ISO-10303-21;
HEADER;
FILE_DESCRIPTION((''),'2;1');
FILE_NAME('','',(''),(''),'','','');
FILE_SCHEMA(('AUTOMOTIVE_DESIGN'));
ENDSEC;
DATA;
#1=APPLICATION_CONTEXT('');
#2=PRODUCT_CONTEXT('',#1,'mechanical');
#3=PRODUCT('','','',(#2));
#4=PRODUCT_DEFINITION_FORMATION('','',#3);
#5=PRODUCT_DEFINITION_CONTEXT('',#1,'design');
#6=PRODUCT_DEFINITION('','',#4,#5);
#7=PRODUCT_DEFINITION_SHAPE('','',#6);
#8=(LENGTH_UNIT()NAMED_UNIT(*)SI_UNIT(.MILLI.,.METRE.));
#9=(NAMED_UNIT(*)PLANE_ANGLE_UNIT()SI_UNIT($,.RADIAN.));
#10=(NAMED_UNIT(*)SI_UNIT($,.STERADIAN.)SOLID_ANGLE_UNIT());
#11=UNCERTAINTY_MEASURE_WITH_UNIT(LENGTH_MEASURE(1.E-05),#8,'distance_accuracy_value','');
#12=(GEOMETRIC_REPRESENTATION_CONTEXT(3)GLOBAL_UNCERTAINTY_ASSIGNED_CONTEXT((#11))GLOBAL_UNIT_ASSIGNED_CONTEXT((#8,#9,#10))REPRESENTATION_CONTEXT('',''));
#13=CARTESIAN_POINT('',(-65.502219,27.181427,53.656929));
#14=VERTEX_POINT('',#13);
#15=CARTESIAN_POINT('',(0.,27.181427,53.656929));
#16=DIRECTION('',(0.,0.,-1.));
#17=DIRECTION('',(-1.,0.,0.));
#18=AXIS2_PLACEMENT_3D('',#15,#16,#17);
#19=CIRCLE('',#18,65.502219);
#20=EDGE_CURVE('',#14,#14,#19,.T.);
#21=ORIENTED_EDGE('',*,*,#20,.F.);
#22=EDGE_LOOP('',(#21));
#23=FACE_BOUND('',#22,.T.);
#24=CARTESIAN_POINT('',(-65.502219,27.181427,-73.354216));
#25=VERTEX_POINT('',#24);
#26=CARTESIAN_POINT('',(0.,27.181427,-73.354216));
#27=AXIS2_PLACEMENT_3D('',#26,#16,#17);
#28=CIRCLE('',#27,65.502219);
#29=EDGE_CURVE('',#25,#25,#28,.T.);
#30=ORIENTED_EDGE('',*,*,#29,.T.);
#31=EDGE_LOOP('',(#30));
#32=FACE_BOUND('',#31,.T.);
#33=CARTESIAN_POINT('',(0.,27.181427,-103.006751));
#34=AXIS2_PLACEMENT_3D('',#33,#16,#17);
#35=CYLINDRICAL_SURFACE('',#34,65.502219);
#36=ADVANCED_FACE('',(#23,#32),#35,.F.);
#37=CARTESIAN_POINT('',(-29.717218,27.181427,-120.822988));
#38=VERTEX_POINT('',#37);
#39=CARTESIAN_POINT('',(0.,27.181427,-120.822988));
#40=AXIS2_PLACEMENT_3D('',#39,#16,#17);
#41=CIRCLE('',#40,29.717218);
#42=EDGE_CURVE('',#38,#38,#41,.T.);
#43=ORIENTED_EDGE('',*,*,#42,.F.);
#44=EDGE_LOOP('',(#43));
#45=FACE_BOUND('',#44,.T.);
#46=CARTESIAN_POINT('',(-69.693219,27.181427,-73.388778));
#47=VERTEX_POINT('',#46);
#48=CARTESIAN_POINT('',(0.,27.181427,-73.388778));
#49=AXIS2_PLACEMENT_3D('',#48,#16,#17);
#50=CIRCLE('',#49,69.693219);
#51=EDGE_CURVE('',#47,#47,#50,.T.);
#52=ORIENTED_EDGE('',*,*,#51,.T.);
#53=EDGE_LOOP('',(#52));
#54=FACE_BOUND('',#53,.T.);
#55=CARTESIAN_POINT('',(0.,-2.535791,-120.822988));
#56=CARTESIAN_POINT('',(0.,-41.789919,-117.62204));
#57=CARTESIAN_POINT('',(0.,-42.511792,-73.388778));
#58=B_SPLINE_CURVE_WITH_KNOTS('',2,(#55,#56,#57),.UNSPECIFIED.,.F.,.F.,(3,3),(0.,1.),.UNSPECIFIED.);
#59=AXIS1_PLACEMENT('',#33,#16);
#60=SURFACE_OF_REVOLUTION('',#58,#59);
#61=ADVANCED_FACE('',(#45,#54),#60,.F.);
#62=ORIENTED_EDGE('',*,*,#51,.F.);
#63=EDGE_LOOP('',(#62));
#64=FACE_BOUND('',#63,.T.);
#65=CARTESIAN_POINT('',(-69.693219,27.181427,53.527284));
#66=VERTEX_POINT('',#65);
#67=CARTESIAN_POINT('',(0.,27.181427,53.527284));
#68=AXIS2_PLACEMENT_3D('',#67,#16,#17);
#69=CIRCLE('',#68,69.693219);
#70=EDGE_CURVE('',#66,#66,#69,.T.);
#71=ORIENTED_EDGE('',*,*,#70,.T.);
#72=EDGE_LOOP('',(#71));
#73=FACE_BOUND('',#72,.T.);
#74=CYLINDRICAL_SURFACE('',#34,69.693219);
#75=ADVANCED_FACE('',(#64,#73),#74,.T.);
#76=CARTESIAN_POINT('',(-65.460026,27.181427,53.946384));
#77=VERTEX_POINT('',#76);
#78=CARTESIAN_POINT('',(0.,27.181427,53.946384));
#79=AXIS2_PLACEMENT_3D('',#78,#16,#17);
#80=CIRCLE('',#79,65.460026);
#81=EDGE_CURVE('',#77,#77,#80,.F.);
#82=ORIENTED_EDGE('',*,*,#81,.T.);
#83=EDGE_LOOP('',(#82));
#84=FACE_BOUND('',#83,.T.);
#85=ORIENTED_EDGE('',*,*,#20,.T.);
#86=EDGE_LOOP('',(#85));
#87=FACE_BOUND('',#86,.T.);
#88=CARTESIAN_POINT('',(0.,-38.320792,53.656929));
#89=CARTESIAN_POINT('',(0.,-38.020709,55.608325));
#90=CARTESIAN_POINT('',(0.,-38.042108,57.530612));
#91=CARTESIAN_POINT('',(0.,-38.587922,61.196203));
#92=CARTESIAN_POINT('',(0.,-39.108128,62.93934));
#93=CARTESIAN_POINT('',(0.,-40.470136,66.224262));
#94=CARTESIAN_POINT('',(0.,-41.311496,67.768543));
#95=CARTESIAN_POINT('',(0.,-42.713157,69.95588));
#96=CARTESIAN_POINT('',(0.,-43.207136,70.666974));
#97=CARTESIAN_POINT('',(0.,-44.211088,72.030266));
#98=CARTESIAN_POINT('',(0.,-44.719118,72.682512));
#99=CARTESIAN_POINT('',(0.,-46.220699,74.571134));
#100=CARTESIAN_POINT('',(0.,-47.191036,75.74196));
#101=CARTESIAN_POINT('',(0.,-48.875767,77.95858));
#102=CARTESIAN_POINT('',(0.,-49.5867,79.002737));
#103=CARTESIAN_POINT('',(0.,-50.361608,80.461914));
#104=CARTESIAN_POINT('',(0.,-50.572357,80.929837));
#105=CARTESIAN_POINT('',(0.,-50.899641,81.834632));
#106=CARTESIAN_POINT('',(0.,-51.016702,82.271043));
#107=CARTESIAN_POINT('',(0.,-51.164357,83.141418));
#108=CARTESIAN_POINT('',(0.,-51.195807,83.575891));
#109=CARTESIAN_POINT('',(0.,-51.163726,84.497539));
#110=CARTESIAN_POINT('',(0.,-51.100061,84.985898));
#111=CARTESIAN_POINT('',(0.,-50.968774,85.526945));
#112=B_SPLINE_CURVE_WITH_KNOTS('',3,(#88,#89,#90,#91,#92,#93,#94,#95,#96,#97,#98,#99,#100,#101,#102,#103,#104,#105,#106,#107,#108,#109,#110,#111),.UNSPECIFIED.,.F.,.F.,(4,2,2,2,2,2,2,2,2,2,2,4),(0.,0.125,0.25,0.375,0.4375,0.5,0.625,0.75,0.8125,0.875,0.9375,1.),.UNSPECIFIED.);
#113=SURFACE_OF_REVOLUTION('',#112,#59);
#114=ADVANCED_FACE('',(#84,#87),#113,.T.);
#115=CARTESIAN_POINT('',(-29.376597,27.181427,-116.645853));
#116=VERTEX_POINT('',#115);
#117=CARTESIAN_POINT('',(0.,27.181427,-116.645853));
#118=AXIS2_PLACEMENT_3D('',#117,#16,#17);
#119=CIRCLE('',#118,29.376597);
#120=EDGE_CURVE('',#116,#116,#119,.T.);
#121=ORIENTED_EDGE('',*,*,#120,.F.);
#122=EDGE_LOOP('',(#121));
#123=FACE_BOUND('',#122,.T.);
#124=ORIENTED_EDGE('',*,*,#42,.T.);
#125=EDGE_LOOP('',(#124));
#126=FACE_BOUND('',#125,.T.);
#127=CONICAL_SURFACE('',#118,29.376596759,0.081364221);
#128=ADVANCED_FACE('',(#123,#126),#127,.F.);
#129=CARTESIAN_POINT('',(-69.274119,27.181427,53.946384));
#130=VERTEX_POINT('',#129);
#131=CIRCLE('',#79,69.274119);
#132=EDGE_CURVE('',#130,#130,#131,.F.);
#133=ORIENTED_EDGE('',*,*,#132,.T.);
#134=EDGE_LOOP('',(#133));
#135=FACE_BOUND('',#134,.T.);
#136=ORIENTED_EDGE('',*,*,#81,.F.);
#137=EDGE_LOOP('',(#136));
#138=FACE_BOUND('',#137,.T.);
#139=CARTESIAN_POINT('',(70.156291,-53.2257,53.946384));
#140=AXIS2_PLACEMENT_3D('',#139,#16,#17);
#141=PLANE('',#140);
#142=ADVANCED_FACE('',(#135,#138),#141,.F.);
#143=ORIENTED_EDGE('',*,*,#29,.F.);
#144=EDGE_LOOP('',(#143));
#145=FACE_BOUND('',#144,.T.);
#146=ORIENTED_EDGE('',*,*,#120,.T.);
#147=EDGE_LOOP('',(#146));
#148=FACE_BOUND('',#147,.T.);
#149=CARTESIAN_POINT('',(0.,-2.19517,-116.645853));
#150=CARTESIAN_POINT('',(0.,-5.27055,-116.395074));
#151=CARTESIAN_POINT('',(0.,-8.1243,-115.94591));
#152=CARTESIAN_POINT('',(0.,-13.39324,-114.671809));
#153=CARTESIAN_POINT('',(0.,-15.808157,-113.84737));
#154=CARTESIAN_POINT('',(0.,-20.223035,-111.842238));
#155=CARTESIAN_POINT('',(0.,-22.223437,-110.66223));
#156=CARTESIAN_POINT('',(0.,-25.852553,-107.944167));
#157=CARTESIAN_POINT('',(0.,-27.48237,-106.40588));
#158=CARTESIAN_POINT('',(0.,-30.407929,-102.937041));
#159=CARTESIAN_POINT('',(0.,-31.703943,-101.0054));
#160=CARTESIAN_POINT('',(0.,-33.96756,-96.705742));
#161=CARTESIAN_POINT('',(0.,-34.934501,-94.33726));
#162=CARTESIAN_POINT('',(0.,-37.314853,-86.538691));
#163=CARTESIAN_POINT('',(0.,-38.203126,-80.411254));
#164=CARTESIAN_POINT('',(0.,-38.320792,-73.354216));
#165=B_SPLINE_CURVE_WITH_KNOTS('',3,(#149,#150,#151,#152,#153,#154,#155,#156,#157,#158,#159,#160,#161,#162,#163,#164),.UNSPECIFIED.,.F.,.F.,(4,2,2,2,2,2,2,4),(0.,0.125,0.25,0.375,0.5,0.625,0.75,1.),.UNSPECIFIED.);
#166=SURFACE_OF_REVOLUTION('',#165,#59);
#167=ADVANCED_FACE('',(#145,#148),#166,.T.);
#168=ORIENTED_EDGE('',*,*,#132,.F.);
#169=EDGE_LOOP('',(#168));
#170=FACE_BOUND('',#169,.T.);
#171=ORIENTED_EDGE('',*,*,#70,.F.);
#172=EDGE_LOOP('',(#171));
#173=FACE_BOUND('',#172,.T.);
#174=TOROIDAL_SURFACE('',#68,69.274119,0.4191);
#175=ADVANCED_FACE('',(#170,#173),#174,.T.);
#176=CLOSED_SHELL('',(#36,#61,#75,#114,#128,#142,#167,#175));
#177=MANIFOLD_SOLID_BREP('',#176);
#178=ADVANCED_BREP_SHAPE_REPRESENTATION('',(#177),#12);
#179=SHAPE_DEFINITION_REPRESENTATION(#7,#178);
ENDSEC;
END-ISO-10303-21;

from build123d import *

# Parameters (mm, degrees)
REVOLVE_THIN3_OUTLINE_W   = 2.54
REVOLVE_THIN3_OUTLINE_H   = 76.976451611
REVOLVE_THIN3_OUTLINE_H_2 = 0.206366599
REVOLVE_THIN3_OUTLINE_H_3 = 0.02094686
SKETCH32_R                = 47.246273806
SKETCH32_R_2              = 1.041920848
BOSS_EXTRUDE1_DEPTH       = 2.54
FILLET1_R                 = 2.54
SKETCH33_W                = 85.158841119
SKETCH33_H                = 0.170915888
CUT_EXTRUDE1_DEPTH        = 108.458
FILLET2_R                 = 0.254
FILLET3_R                 = 0.254
SCALE3_SCALE              = 1.65
SKETCH35_W                = 53.780187303
SKETCH35_H                = 190.112658653
CUT_EXTRUDE2_DEPTH        = 201.422


# Read off the part's stored shape, not the designer's step: Revolve-Thin3
with BuildPart() as part:
    # Revolve-Thin3 outline → Revolve-Thin3 (revolve)
    with BuildSketch(Plane.XZ.offset(-16.473592108)):
        with Locations((40.968314643, -5.968874658)):
            Rectangle(REVOLVE_THIN3_OUTLINE_W, REVOLVE_THIN3_OUTLINE_H)
        with BuildLine():
            add(Edge.make_bspline(
                [(39.698314643, 32.519351147), (39.687726817, 32.588202211), (39.677799336, 32.656993484), (39.668523832, 32.725717746)],
                knots=[0, 0, 0, 0, 0.007277117, 0.007277117, 0.007277117, 0.007277117], degree=3))
            Line((39.698314643, 32.519351147), (39.698314643, 32.725717746))
            Line((39.698314643, 32.725717746), (39.668523832, 32.725717746))
        make_face()
        with Locations((40.968314643, 32.622534446)):
            Rectangle(REVOLVE_THIN3_OUTLINE_W, REVOLVE_THIN3_OUTLINE_H_2)
        with BuildLine():
            add(Edge.make_bspline(
                [(39.668523832, 32.725717746), (39.518472779, 33.837479263), (39.539043978, 34.931703978), (39.695973098, 35.985611225), (39.697140195, 35.99339708), (39.698314643, 36.001180261)],
                knots=[0.007277117, 0.007277117, 0.007277117, 0.007277117, 0.125, 0.125, 0.125876466, 0.125876466, 0.125876466, 0.125876466], degree=3))
            Line((39.668523832, 32.725717746), (39.698314643, 32.725717746))
            Line((39.698314643, 32.725717746), (39.698314643, 36.001180261))
        make_face()
        with BuildLine():
            Line((39.698314643, -44.478047324), (39.698314643, -44.457100464))
            add(Edge.make_bspline(
                [(39.697961573, -44.478047324), (39.698080508, -44.471066539), (39.698198198, -44.464084253), (39.698314643, -44.457100464)],
                knots=[0.999591782, 0.999591782, 0.999591782, 0.999591782, 1, 1, 1, 1], degree=3))
            Line((39.697961573, -44.478047324), (39.698314643, -44.478047324))
        make_face()
        with Locations((40.968314643, -44.467573894)):
            Rectangle(REVOLVE_THIN3_OUTLINE_W, REVOLVE_THIN3_OUTLINE_H_3)
        with BuildLine():
            Line((39.698314643, 36.001180261), (39.698314643, 32.725717746))
            Line((39.698314643, 32.725717746), (42.238314643, 32.725717746))
            add(Edge.make_bspline(
                [(42.238314643, 32.725717746), (42.054562539, 33.777592883), (42.068967464, 34.803136992), (42.238314643, 35.799403945)],
                knots=[0, 0, 0, 0, 0.141281123, 0.141281123, 0.141281123, 0.141281123], degree=3))
            Line((42.238314643, 35.799403945), (42.238314643, 42.203297665))
            add(Edge.make_bspline(
                [(39.698314643, 36.001180261), (39.864637797, 37.10341997), (40.178381679, 38.152034474), (41.000947274, 40.135916369), (41.510862605, 41.071843995), (42.130351801, 42.038577334), (42.184085036, 42.121152876), (42.238314643, 42.203297665)],
                knots=[0.125876466, 0.125876466, 0.125876466, 0.125876466, 0.25, 0.25, 0.375, 0.375, 0.386733849, 0.386733849, 0.386733849, 0.386733849], degree=3))
        make_face()
        with BuildLine():
            Line((39.698314643, -44.478047324), (39.697961573, -44.478047324))
            add(Edge.make_bspline(
                [(18.010435206, -70.677083721), (19.79573085, -70.522158772), (21.456515081, -70.25595625), (24.590707244, -69.498066317), (26.054293619, -68.998406284), (28.729976787, -67.78317439), (29.942341958, -67.068017905), (32.141805888, -65.420707287), (33.129574164, -64.488411909), (34.902639951, -62.386085615), (35.688102783, -61.215394241), (37.05999238, -58.60954034), (37.646016791, -57.174096931), (39.087083849, -52.452836699), (39.625242566, -48.746219412), (39.697961573, -44.478047324)],
                knots=[0.004627238, 0.004627238, 0.004627238, 0.004627238, 0.125, 0.125, 0.25, 0.25, 0.375, 0.375, 0.5, 0.5, 0.625, 0.625, 0.75, 0.75, 0.999591782, 0.999591782, 0.999591782, 0.999591782], degree=3))
            Line((18.010435206, -70.677083721), (18.010435206, -70.694456457))
            Line((18.010435206, -70.694456457), (28.462249201, -70.694456457))
            add(Edge.make_bspline(
                [(28.462249201, -70.694456457), (36.319875776, -67.117155429), (39.698314643, -58.770046926)],
                knots=[0.250450742, 0.250450742, 0.250450742, 0.688405646, 0.688405646, 0.688405646], degree=2))
            Line((39.698314643, -58.770046926), (39.698314643, -44.478047324))
        make_face()
        with BuildLine():
            Line((42.238314643, -44.478047324), (39.698314643, -44.478047324))
            Line((39.698314643, -44.478047324), (39.698314643, -58.770046926))
            add(Edge.make_bspline(
                [(39.698314643, -58.770046926), (42.101992439, -52.831280485), (42.238314643, -44.478047324)],
                knots=[0.688405646, 0.688405646, 0.688405646, 1, 1, 1], degree=2))
        make_face()
        with BuildLine():
            add(Edge.make_bspline(
                [(42.238314643, 42.203297665), (42.472937439, 42.558694673), (42.716851503, 42.906028704), (43.268191066, 43.654706519), (43.576088068, 44.050007388), (44.486136773, 45.194626874), (45.074219946, 45.904218472), (46.0952688, 47.247624232), (46.526137449, 47.880446647), (46.995778794, 48.764796386), (47.123505223, 49.048386117), (47.278542653, 49.476995244), (47.325447008, 49.628350247), (47.363757964, 49.77823029)],
                knots=[0.386733849, 0.386733849, 0.386733849, 0.386733849, 0.4375, 0.4375, 0.5, 0.5, 0.625, 0.625, 0.75, 0.75, 0.8125, 0.8125, 0.847702352, 0.847702352, 0.847702352, 0.847702352], degree=3))
            Line((42.238314643, 42.203297665), (42.238314643, 35.799403945))
            add(Edge.make_bspline(
                [(42.238314643, 35.799403945), (42.577155463, 37.792799485), (44.167905472, 40.904465888), (46.512712316, 43.628815223), (47.363757964, 44.722836867)],
                knots=[0.141281123, 0.141281123, 0.141281123, 0.141281123, 0.423965559, 0.610115154, 0.610115154, 0.610115154, 0.610115154], degree=3))
            Line((47.363757964, 44.722836867), (47.363757964, 49.77823029))
        make_face()
        with BuildLine():
            Line((18.010435206, -70.694456457), (18.010435206, -70.677083721))
            add(Edge.make_bspline(
                [(17.803998036, -70.694456457), (17.872994465, -70.688830195), (17.941806831, -70.683039176), (18.010435206, -70.677083721)],
                knots=[0, 0, 0, 0, 0.004627238, 0.004627238, 0.004627238, 0.004627238], degree=3))
            Line((17.803998036, -70.694456457), (18.010435206, -70.694456457))
        make_face()
        with BuildLine():
            add(Edge.make_bspline(
                [(47.363757964, 49.77823029), (47.393466178, 49.894454702), (47.418006992, 50.009792187), (47.482293388, 50.388738185), (47.501353806, 50.652055315), (47.481910982, 51.210629928), (47.44332582, 51.506604575), (47.363757964, 51.83451188)],
                knots=[0.847702352, 0.847702352, 0.847702352, 0.847702352, 0.875, 0.875, 0.9375, 0.9375, 1, 1, 1, 1], degree=3))
            Line((47.363757964, 49.77823029), (47.363757964, 44.722836867))
            add(Edge.make_bspline(
                [(47.363757964, 44.722836867), (48.462338755, 46.135065654), (49.427688757, 47.567830661), (49.832127601, 49.178979157)],
                knots=[0.610115154, 0.610115154, 0.610115154, 0.610115154, 0.850408223, 0.850408223, 0.850408223, 0.850408223], degree=3))
            Line((49.832127601, 49.178979157), (49.832127601, 51.83451188))
            Line((49.832127601, 51.83451188), (47.363757964, 51.83451188))
        make_face()
        Polygon((18.010435206, -70.694456457), (17.803998036, -70.694456457), (18.010435206, -73.226053521), align=None)
        with BuildLine():
            Line((28.462249201, -70.694456457), (18.010435206, -70.694456457))
            Line((18.010435206, -70.694456457), (18.010435206, -73.226053521))
            add(Edge.make_bspline(
                [(18.010435206, -73.226053521), (23.968753656, -72.740186943), (28.462249201, -70.694456457)],
                knots=[0, 0, 0, 0.250450742, 0.250450742, 0.250450742], degree=2))
        make_face()
        Polygon((49.832127601, 52.433470423), (47.363757964, 51.83451188), (49.832127601, 51.83451188), align=None)
        with BuildLine():
            Line((49.832127601, 51.83451188), (49.832127601, 49.178979157))
            add(Edge.make_bspline(
                [(49.832127601, 49.178979157), (49.962029278, 49.696463804), (50.0340657, 50.232351019), (50.034065718, 50.791871057)],
                knots=[0.850408223, 0.850408223, 0.850408223, 0.850408223, 0.927587932, 0.927587932, 0.927587932, 0.927587932], degree=3))
            add(Edge.make_bspline(
                [(50.034065718, 50.791871057), (50.034065729, 51.130381669), (50.007698462, 51.477542535), (49.951825757, 51.83451188)],
                knots=[0.927587932, 0.927587932, 0.927587932, 0.927587932, 0.974281793, 0.974281793, 0.974281793, 0.974281793], degree=3))
            Line((49.951825757, 51.83451188), (49.832127601, 51.83451188))
        make_face()
        with BuildLine():
            add(Edge.make_bspline(
                [(49.951825757, 51.83451188), (49.921051995, 52.031124695), (49.881327391, 52.230713035), (49.832127601, 52.433470423)],
                knots=[0.974281793, 0.974281793, 0.974281793, 0.974281793, 1, 1, 1, 1], degree=3))
            Line((49.832127601, 52.433470423), (49.832127601, 51.83451188))
            Line((49.832127601, 51.83451188), (49.951825757, 51.83451188))
        make_face()
    revolve(axis=Axis((0, 16.473592108, 0), (0, 0, 1)))

    # Sketch33 → Cut-Extrude1 (cut)
    with BuildSketch(Plane(origin=(0, 76.2, 0), x_dir=(1, 0, 0), z_dir=(0, 1, 0))):
        with Locations((-0.060456445, -32.78023641)):
            Rectangle(SKETCH33_W, SKETCH33_H)
    extrude(amount=-CUT_EXTRUDE1_DEPTH, mode=Mode.SUBTRACT)


with BuildPart() as body_2:
    # Sketch32 → Boss-Extrude1 (new body)
    with BuildSketch(Plane.XY.offset(52.433470423)):
        with Locations((0, 16.473592108)):
            Circle(SKETCH32_R)
        with Locations((0, 16.473592108)):
            Circle(SKETCH32_R_2, mode=Mode.SUBTRACT)
    extrude(amount=BOSS_EXTRUDE1_DEPTH)

    # Fillet1
    fillet1_edges = [body_2.edges().sort_by_distance(p)[0] for p in [
        (-47.246273806, 16.473592108, 54.973470423),
        (-1.041920848, 16.473592108, 54.973470423),
    ]]
    fillet(fillet1_edges, radius=FILLET1_R - 0.0001)  # a hair under: the kernel refuses the full size


with BuildPart() as cut_extrude1_piece_1:
    # of the separate pieces the step leaves, piece 1, a body of its own (cut_extrude1_pieces)
    add(part.part.solids().sort_by_distance((42.238314643, 16.473592108, 32.694778466))[0])

    # Fillet2
    fillet2_edges = [cut_extrude1_piece_1.edges().sort_by_distance(p)[0] for p in [
        (-42.238314643, 16.473592108, 32.694778466),
    ]]
    fillet(fillet2_edges, radius=FILLET2_R)


with BuildPart() as cut_extrude1_piece_2:
    # of the separate pieces the step leaves, piece 2, a body of its own (cut_extrude1_pieces)
    add(part.part.solids().sort_by_distance((42.215003382, 16.473592108, 32.865694354))[0])

    # Fillet3
    fillet3_edges = [cut_extrude1_piece_2.edges().sort_by_distance(p)[0] for p in [
        (-42.21500338, 16.473592107, 32.865694354),
    ]]
    fillet(fillet3_edges, radius=FILLET3_R)


with BuildPart() as body_2_1:
    # Scale3: scaled about (0, 0, 0)
    add(body_2.part.scale(SCALE3_SCALE))


with BuildPart() as cut_extrude1_piece_1_1:
    # Scale3: scaled about (0, 0, 0)
    add(cut_extrude1_piece_1.part.scale(SCALE3_SCALE))


with BuildPart() as cut_extrude1_piece_2_1:
    # Scale3: scaled about (0, 0, 0)
    add(cut_extrude1_piece_2.part.scale(SCALE3_SCALE))


with BuildPart() as cut_extrude2_tool:
    # Sketch35 → Cut-Extrude2 (new body)
    with BuildSketch(Plane(origin=(-101.6, 0, 0), x_dir=(0, 0, -1), z_dir=(1, 0, 0))):
        with Locations((-80.974469867, 30.532269515)):
            Rectangle(SKETCH35_W, SKETCH35_H)
    extrude(amount=CUT_EXTRUDE2_DEPTH)


with BuildPart() as body_2_2:
    add(body_2_1.part)

    # Cut-Extrude2: cut by cut_extrude2_tool
    add(cut_extrude2_tool.part, mode=Mode.SUBTRACT)


with BuildPart() as cut_extrude1_piece_2_2:
    add(cut_extrude1_piece_2_1.part)

    # Cut-Extrude2: cut by cut_extrude2_tool
    add(cut_extrude2_tool.part, mode=Mode.SUBTRACT)


solid = cut_extrude1_piece_1_1.part
